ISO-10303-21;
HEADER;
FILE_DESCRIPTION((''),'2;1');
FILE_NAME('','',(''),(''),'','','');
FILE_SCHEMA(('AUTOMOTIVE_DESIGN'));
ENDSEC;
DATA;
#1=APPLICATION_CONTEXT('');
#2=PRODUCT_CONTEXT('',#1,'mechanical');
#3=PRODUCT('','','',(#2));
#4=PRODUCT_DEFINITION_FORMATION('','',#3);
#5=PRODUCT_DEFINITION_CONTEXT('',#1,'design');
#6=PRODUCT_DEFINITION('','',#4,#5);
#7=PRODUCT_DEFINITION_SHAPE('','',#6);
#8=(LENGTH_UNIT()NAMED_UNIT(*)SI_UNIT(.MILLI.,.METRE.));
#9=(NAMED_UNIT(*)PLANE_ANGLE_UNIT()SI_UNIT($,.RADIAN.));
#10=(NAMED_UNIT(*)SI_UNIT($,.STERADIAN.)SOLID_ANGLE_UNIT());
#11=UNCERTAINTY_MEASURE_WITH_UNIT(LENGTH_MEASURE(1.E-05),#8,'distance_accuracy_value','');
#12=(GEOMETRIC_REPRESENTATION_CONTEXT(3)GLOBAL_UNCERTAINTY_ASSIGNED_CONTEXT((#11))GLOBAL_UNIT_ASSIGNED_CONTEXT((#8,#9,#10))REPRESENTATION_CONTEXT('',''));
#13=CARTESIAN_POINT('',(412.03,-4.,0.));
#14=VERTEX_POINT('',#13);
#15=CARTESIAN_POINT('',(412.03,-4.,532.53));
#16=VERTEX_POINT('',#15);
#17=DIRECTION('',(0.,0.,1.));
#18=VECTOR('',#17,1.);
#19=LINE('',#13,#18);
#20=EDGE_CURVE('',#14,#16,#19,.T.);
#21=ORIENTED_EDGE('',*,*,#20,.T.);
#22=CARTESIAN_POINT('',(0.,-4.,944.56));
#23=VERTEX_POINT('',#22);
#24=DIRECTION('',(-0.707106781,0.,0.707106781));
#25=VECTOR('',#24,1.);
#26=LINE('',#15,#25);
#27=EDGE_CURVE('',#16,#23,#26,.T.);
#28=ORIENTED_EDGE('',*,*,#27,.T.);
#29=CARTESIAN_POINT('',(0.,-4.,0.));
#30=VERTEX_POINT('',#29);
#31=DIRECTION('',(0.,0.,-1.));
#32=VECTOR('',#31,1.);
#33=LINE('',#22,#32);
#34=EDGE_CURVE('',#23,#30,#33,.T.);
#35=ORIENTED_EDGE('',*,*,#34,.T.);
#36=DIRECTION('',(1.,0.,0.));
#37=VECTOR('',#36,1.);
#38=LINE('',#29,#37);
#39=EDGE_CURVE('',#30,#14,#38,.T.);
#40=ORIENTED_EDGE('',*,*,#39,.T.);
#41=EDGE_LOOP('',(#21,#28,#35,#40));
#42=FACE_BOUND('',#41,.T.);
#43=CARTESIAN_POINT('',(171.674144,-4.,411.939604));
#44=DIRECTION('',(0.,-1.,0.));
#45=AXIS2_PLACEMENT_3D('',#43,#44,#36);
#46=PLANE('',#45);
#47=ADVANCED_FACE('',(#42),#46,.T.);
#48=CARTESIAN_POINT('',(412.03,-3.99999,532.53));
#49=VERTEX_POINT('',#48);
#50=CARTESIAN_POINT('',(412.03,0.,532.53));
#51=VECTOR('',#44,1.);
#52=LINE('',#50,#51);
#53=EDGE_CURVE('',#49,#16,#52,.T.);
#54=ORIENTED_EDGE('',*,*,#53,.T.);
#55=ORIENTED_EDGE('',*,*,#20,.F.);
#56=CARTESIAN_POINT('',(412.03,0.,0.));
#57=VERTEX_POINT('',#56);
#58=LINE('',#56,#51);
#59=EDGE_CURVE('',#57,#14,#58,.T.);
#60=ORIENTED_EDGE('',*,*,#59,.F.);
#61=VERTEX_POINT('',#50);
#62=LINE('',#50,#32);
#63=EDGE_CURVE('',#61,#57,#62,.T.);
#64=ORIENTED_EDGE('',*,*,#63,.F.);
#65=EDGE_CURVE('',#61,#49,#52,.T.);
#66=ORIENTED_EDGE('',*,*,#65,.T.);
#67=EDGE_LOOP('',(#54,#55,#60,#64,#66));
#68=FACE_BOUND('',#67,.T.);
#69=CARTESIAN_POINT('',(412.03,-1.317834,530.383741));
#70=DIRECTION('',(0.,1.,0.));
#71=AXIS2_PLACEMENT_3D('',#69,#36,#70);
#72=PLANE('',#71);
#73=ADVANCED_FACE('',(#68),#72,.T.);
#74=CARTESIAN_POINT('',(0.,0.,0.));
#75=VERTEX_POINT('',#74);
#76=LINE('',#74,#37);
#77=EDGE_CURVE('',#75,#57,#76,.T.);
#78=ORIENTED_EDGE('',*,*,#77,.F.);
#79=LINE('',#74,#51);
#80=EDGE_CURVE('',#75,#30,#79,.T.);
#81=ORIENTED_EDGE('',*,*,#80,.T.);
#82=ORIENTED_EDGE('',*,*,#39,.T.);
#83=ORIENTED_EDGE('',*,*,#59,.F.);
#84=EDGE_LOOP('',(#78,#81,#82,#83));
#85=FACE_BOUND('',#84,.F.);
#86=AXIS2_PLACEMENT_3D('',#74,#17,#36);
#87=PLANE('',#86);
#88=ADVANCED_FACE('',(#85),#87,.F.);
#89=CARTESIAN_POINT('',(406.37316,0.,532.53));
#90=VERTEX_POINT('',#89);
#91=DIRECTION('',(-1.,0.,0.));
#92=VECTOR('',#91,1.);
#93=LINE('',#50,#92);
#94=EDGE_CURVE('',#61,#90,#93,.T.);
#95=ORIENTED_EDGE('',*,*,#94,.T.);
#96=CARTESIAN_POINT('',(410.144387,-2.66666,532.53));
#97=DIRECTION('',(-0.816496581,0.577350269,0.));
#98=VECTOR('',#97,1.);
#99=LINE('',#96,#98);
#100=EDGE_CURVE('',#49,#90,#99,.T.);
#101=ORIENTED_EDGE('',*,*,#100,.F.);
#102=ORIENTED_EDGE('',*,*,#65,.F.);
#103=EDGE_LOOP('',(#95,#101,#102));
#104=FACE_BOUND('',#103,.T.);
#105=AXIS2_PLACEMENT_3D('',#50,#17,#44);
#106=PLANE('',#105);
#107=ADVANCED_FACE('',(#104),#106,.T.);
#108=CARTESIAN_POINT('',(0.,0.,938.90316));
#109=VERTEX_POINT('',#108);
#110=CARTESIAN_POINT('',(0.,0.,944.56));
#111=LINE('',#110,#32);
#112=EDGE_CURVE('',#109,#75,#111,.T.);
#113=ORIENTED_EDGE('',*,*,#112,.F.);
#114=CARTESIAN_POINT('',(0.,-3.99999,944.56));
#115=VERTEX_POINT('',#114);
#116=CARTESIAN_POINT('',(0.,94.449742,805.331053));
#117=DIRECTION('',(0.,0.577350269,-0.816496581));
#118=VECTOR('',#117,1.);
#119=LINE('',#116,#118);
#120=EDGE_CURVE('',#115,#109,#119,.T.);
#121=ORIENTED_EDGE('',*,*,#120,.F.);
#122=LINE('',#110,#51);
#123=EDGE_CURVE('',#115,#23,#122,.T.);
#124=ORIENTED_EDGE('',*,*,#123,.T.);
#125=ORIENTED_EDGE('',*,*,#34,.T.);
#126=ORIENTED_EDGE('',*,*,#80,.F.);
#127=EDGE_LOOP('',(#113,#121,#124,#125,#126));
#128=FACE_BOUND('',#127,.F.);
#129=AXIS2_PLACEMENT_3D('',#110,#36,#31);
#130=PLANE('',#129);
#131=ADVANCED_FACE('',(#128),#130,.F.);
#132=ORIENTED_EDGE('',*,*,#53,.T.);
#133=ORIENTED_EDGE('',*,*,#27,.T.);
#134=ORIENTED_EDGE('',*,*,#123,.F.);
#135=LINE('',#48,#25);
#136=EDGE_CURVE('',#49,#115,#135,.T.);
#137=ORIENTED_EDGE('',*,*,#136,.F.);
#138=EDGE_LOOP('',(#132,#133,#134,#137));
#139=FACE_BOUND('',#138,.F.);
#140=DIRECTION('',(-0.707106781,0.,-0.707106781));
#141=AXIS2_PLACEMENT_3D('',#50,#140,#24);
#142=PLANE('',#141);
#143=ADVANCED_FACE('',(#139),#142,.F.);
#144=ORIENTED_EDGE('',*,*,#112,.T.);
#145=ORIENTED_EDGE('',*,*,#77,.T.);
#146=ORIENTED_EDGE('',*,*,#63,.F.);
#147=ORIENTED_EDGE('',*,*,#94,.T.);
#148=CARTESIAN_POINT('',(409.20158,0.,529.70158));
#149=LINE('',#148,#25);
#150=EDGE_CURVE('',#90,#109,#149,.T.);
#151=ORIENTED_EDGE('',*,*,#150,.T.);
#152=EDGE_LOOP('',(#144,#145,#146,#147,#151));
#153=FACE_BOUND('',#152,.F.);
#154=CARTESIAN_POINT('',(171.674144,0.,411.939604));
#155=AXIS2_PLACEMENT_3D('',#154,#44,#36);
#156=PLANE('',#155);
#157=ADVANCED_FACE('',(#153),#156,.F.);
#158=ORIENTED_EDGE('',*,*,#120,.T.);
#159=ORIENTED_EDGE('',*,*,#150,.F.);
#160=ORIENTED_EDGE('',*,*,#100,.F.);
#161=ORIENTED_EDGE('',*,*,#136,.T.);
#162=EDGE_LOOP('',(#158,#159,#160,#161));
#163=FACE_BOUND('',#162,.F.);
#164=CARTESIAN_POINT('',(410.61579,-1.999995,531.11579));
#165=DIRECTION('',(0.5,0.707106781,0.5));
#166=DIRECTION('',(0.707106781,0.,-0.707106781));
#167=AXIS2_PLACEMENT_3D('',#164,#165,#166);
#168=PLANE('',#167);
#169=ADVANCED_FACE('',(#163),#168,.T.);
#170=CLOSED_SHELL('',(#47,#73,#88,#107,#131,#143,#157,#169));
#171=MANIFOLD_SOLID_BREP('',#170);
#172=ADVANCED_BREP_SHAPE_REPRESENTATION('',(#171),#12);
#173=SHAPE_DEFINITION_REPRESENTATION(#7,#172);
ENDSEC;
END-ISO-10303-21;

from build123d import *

# Parameters (mm, degrees)
F1_DEPTH = 4
F2_SIZE  = 3.99999
F4_DEPTH = 25


# Not quite as in the source:
# - a fillet or chamfer is up to 0.001 mm smaller than in the source, because OpenCascade refuses the exact size
# - ends of sketch curves that miss each other by under 0.0002 mm in the source are joined


with BuildPart() as f1:
    # F0 (on Front) → F1 (new body)
    with BuildSketch(Plane.XZ):
        Polygon((0, 944.56), (0, 0), (412.03, 0), (412.03, 532.53), align=None)
    extrude(amount=F1_DEPTH)

    # F2 (size 4 in the source; OpenCascade refuses exactly that, so slightly less here)
    f2_edges = [f1.edges().sort_by_distance(p)[0] for p in [
        (206.015, 0, 738.545),
    ]]
    chamfer(f2_edges, length=F2_SIZE)

    # F3 (on face) → F4 (join)
    with BuildSketch(Plane.YZ.offset(412.03)):
        Polygon((-3.99999, 532.53), (0, 526.8731598926), (0, 532.53), align=None)
    extrude(amount=-F4_DEPTH)


solid = f1.part
